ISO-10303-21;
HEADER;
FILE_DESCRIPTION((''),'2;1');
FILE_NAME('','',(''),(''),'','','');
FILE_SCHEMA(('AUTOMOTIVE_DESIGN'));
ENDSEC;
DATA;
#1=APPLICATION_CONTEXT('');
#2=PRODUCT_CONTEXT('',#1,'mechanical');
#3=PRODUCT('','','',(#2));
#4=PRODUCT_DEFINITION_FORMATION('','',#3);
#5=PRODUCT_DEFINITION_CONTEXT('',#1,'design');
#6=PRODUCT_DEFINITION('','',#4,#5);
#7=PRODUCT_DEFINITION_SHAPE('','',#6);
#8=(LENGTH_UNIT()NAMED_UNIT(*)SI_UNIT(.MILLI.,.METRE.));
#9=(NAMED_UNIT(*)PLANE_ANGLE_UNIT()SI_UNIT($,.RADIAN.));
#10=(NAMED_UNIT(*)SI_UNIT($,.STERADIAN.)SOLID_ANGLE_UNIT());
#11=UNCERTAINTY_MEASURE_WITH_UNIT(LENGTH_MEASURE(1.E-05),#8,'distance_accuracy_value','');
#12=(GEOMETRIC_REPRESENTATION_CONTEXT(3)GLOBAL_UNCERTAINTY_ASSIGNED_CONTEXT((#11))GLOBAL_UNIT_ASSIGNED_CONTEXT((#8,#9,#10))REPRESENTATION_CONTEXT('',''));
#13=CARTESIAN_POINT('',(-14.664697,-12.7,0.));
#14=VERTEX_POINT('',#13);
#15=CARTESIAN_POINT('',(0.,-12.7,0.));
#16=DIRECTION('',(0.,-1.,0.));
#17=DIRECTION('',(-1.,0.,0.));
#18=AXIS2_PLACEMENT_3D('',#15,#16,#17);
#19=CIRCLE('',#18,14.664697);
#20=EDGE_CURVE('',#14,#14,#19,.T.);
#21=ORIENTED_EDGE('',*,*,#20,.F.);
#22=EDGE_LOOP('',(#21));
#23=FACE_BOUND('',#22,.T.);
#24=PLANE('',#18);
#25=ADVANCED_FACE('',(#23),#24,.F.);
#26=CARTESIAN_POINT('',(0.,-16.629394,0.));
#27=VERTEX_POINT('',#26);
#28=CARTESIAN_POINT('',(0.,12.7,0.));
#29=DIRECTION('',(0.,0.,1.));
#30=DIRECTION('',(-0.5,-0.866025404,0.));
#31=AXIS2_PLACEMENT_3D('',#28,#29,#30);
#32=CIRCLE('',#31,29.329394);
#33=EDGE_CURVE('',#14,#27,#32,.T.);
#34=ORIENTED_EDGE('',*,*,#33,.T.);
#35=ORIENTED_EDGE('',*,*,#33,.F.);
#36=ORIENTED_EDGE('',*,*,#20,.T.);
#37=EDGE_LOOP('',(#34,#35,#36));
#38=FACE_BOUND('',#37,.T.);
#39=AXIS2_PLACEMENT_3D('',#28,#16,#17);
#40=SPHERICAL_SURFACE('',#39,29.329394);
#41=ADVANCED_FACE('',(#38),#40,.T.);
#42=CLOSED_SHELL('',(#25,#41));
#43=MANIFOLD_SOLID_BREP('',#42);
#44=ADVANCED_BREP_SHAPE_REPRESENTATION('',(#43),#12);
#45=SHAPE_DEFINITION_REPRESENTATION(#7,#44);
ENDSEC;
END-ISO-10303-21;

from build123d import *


# Not quite as in the source:
# - the program builds the solid bodies; features that only make, move or delete a surface that nothing else refers to are left out


with BuildPart() as f2:
    # F0 (on Top) → F2 (revolve)
    with BuildSketch(Plane.XY):
        with BuildLine():
            Line((0, -16.6293936748), (0, -12.7))
            Line((0, -12.7), (-14.6646968374, -12.7))
            ThreePointArc((-14.6646968374, -12.7), (-7.5910056644, -15.6300188199), (0, -16.6293936748))
        make_face()
    revolve(axis=Axis((0, -14.6646968374, 0), (0, -1, 0)))


solid = f2.part
